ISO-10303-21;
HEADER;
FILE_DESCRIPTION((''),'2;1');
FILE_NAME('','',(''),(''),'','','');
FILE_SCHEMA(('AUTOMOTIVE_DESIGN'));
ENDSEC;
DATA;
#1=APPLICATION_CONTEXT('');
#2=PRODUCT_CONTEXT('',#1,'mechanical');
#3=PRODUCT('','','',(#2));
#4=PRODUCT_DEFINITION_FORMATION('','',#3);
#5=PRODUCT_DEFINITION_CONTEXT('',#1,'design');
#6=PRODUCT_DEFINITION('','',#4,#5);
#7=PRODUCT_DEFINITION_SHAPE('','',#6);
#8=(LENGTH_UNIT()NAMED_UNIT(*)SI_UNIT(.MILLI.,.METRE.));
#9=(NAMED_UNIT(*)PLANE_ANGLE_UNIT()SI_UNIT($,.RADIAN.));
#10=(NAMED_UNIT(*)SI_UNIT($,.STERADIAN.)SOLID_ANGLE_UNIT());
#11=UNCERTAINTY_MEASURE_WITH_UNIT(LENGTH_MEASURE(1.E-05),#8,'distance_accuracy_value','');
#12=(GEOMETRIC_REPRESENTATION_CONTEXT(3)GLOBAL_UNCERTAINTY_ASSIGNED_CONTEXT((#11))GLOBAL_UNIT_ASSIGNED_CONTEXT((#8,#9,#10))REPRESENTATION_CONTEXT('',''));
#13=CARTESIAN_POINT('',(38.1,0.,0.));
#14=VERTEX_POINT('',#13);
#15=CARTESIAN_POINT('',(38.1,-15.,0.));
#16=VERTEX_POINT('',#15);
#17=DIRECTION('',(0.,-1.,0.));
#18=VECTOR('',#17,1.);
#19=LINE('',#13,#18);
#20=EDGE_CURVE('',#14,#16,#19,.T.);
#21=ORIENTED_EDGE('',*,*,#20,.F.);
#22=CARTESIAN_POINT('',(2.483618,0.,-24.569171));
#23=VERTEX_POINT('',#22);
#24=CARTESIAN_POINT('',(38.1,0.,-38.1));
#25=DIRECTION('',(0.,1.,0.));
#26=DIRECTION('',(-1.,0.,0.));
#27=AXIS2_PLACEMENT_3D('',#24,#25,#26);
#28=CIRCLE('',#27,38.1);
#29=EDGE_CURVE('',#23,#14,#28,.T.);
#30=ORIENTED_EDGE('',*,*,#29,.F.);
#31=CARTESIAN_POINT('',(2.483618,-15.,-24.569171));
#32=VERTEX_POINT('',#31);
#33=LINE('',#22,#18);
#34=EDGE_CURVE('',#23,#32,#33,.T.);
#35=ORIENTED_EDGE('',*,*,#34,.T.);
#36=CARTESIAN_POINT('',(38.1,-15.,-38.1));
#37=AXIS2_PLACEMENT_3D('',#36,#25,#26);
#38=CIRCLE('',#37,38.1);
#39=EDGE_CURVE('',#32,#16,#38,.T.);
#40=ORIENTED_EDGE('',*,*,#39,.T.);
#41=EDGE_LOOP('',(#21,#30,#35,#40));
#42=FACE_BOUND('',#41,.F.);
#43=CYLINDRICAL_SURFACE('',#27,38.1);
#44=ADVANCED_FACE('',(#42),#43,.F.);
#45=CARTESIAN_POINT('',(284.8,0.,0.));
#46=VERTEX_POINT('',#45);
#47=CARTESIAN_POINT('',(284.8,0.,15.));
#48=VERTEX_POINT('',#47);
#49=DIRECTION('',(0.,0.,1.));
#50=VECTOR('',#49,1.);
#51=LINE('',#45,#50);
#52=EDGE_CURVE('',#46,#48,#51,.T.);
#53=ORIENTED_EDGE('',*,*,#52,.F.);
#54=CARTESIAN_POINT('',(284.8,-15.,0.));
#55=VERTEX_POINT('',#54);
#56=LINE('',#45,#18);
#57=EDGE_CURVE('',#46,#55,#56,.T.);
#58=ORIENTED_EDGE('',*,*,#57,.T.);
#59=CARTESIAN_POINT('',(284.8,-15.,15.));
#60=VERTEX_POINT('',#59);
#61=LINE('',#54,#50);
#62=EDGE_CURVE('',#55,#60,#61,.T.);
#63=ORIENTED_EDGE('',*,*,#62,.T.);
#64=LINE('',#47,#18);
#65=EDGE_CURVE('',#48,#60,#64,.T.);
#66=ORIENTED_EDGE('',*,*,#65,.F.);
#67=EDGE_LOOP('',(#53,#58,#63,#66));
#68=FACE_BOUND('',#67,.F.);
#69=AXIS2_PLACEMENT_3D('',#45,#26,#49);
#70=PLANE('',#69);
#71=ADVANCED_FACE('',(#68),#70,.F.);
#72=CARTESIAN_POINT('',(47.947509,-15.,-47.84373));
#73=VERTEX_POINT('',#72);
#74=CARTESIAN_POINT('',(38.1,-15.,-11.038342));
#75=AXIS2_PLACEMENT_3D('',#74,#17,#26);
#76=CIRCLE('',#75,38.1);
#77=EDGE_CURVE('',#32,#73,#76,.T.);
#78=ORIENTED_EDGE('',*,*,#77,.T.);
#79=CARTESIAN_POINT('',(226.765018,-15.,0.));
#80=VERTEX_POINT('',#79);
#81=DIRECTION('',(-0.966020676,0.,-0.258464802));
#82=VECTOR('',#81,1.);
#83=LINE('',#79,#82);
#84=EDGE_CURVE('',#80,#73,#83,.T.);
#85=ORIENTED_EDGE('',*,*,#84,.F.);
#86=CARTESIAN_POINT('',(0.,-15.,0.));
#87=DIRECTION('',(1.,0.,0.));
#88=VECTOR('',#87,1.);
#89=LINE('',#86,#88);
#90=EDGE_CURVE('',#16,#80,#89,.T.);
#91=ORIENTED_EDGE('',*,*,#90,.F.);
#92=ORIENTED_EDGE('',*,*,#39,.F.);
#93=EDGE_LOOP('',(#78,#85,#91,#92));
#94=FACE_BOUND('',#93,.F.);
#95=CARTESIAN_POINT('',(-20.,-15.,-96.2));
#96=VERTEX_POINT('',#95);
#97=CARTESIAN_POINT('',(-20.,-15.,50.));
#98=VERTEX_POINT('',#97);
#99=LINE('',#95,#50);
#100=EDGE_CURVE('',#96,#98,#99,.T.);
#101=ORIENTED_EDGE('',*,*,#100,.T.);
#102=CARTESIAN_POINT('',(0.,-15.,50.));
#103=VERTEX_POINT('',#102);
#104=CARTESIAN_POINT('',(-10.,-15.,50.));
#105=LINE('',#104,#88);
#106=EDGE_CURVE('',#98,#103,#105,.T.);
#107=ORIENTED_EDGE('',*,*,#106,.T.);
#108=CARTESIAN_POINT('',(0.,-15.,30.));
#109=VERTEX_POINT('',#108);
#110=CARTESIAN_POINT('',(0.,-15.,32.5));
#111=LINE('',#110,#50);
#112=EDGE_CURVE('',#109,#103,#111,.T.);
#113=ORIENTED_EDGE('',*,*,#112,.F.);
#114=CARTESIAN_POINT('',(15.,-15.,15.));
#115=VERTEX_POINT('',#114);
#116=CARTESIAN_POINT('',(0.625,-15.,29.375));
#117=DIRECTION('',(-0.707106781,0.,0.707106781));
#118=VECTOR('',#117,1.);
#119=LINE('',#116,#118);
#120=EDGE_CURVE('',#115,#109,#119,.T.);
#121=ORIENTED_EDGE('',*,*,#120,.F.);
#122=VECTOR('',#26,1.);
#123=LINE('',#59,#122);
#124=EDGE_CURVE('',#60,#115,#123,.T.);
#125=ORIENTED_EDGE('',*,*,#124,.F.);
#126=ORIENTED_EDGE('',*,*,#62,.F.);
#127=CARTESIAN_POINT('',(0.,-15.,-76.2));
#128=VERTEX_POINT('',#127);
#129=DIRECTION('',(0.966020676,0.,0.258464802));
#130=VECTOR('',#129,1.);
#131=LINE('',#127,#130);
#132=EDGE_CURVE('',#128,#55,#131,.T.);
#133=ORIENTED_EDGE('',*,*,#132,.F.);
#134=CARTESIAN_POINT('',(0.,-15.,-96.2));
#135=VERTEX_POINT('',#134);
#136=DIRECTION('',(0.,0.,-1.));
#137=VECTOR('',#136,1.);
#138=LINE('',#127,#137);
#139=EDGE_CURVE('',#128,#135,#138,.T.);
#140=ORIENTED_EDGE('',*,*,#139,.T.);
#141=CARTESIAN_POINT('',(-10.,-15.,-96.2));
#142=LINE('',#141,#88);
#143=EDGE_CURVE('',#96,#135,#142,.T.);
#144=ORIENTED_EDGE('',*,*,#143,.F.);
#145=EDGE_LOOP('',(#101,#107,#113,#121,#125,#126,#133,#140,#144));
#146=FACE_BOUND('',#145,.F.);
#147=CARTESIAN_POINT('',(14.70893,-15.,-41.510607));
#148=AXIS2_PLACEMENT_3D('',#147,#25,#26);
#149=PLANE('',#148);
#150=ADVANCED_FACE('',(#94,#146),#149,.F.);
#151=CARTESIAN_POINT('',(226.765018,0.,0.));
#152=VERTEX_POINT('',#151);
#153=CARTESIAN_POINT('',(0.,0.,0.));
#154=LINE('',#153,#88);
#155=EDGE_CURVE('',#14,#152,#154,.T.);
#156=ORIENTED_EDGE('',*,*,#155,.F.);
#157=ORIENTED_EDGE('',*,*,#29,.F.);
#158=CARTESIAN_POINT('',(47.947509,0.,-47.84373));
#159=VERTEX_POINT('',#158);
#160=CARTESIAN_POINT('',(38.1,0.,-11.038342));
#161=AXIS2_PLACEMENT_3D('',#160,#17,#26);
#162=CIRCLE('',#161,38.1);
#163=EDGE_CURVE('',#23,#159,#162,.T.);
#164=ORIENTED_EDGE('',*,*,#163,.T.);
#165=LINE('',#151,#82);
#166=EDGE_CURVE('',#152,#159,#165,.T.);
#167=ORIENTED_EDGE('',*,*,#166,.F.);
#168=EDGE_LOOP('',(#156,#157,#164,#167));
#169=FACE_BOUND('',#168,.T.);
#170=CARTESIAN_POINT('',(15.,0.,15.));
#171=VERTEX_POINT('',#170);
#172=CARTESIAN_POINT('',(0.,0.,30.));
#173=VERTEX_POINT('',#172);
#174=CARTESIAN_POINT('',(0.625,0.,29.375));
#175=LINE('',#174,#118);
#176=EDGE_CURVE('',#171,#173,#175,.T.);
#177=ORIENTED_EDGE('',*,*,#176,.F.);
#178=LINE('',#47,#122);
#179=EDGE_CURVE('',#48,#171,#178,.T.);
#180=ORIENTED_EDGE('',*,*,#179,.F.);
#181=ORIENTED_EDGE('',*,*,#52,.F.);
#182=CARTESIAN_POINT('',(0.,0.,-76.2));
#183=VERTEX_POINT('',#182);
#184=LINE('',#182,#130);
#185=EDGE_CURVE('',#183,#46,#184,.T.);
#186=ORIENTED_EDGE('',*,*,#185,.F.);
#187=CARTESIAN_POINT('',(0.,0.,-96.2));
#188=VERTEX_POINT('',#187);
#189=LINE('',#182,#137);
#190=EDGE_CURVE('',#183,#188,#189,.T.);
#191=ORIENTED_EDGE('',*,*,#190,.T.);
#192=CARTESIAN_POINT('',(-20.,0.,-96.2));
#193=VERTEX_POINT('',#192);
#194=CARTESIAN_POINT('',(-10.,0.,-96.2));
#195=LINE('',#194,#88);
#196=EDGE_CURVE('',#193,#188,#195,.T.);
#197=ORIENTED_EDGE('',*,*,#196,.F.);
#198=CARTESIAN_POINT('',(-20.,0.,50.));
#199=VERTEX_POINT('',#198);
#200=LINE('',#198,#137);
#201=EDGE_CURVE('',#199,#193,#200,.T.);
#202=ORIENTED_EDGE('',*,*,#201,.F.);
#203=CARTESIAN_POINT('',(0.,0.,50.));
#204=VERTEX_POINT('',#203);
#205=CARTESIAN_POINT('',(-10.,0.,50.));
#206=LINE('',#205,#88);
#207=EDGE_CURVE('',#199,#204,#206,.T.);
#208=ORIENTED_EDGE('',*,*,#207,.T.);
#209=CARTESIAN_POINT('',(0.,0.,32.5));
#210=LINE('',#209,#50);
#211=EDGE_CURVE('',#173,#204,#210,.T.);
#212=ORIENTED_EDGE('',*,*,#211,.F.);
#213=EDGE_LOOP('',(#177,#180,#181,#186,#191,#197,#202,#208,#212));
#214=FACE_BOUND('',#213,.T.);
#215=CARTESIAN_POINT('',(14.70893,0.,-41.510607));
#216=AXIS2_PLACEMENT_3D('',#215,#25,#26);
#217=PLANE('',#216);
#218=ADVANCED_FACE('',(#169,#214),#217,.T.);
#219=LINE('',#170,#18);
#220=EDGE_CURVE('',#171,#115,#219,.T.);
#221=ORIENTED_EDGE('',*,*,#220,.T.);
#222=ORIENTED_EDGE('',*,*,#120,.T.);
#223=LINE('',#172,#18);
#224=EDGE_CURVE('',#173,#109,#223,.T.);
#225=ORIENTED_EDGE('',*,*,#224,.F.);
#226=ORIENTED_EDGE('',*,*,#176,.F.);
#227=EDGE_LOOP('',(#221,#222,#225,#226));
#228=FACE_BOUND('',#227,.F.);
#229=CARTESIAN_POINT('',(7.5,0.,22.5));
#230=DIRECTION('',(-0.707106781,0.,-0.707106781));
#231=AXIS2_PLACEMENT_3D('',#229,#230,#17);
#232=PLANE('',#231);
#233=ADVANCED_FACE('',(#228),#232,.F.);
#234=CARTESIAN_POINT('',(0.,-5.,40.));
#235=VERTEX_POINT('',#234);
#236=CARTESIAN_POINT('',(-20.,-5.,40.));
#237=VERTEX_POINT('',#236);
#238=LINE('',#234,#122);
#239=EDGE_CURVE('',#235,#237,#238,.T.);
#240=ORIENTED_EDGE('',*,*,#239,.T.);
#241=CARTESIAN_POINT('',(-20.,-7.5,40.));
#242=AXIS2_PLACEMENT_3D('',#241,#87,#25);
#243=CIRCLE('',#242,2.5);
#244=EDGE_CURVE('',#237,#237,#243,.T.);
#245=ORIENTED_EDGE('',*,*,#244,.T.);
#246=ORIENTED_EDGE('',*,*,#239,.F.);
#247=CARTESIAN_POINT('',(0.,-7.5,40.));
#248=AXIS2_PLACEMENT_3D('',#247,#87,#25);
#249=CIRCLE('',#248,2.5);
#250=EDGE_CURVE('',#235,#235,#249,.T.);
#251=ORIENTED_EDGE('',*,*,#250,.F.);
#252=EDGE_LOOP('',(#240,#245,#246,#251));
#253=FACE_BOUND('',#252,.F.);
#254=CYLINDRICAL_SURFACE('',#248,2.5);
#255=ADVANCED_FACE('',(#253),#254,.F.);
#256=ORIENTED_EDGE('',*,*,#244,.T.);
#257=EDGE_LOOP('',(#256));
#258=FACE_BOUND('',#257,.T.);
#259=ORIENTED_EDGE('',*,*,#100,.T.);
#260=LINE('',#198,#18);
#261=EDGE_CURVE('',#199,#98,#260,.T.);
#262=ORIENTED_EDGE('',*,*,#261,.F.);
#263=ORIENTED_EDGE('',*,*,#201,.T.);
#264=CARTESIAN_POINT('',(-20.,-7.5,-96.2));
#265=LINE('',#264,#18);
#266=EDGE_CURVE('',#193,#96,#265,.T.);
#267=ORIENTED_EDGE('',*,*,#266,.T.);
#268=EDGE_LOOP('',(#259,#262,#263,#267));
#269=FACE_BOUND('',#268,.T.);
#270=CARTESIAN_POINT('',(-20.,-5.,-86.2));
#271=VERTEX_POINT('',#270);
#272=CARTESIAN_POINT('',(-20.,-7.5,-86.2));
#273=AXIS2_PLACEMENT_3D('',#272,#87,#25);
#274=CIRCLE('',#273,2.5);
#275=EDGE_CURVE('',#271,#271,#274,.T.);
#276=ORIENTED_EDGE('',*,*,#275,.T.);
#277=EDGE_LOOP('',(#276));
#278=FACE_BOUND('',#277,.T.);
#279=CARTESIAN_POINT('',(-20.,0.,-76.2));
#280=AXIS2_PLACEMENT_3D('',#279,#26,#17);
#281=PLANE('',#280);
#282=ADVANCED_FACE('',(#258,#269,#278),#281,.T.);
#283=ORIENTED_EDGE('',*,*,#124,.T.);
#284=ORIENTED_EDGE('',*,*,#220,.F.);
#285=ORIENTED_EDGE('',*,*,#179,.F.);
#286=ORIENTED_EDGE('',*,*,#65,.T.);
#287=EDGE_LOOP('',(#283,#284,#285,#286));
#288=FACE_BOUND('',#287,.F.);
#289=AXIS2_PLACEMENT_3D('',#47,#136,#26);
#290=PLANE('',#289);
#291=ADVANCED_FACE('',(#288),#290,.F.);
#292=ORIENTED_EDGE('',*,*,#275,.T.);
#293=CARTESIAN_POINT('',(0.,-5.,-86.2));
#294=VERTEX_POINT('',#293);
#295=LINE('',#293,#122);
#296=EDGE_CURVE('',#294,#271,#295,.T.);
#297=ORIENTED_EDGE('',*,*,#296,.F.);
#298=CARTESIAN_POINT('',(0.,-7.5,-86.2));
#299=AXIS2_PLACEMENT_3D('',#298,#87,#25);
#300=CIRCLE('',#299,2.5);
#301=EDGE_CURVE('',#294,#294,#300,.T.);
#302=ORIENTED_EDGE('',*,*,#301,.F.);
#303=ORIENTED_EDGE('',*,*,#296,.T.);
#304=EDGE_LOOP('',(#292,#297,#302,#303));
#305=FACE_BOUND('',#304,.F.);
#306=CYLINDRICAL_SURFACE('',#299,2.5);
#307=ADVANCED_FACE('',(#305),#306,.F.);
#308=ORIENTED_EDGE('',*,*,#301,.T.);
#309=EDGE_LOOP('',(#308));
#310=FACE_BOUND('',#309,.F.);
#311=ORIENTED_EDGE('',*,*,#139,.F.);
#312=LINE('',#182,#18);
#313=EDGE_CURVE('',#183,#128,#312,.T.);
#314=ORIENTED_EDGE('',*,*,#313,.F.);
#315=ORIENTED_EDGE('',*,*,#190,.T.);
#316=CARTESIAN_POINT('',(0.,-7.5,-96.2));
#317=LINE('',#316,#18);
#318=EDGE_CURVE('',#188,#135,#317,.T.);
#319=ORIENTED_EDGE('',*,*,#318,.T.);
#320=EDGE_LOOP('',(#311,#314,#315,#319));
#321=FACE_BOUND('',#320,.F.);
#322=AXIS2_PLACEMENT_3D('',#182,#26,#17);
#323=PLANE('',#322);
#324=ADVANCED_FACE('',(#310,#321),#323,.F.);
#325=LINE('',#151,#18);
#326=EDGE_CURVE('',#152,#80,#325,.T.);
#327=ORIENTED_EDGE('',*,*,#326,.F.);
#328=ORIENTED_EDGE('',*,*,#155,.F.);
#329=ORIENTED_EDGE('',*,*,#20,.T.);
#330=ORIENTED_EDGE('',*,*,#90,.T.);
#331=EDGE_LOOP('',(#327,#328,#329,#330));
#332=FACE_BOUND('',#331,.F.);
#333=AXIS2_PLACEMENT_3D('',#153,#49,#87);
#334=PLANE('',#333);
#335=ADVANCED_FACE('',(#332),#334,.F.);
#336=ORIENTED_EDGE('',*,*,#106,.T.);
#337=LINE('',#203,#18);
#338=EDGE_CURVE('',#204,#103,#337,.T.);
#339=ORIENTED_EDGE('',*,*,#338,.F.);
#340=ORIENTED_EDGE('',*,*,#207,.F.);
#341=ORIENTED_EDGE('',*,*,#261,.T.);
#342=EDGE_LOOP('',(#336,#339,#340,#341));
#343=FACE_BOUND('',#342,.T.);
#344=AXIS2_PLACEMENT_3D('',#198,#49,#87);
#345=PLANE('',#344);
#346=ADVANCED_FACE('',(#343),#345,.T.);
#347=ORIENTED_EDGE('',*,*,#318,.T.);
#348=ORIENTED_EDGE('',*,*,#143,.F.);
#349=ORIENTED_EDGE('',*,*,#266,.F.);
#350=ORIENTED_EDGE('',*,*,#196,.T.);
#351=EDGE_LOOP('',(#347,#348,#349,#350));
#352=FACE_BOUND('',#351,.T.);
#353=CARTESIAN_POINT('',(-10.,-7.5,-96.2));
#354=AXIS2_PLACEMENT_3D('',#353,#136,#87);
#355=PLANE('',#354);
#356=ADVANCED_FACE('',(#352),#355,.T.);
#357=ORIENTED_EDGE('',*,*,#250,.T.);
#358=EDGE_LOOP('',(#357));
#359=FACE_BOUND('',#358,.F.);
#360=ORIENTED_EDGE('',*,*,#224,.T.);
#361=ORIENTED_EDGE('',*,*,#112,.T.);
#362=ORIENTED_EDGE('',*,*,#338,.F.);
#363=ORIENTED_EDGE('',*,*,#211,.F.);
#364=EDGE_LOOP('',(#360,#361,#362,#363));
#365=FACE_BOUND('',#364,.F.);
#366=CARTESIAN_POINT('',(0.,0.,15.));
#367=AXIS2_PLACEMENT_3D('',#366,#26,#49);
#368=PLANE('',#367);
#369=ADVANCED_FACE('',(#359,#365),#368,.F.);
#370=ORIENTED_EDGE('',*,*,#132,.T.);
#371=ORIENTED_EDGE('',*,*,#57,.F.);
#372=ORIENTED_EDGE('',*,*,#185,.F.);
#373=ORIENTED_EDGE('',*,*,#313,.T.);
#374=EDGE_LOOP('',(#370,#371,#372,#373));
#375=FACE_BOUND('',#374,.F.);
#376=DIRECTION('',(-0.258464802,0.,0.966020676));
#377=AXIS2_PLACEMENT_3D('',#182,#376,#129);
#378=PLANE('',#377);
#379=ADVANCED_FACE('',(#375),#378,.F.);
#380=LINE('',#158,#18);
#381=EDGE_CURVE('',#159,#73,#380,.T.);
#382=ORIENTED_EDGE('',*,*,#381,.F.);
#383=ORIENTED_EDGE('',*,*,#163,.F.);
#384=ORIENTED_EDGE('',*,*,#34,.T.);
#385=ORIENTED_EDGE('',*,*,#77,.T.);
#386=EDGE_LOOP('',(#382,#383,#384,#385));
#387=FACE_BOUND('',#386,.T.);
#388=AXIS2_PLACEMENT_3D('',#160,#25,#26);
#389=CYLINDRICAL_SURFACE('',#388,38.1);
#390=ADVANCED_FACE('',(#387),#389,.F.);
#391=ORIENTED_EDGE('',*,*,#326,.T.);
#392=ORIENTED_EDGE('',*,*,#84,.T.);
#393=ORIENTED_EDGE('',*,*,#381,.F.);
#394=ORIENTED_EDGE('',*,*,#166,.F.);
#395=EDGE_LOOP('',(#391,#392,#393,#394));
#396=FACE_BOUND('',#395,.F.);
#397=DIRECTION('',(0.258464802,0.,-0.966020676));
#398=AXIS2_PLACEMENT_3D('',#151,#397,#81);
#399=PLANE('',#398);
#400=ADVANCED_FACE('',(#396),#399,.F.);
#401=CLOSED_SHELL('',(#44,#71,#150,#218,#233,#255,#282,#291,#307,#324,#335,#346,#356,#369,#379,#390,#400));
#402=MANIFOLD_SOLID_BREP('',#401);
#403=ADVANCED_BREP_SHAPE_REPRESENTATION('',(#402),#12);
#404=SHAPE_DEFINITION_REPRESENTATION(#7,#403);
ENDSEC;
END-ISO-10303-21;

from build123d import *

# Parameters (mm, degrees)
F0_W        = 20
F0_H        = 35
F1_DEPTH    = 15
F2_SIZE     = 15
F3_R        = 2.5
F4_DEPTH    = 20.001
F5_W        = 20
F5_H        = 15
F6_DEPTH    = 20
F7_R        = 2.5
F8_DEPTH    = 20.001
F9_T1_DEPTH = 15


# Not quite as in the source:
# - a fillet or chamfer that OpenCascade refuses, or shapes differently, is made with other operations: its cross-section is extruded or revolved along the edge and cut away or added


with BuildPart() as f1:
    # F0 (on Front) → F1 (new body)
    with BuildSketch(Plane.XZ):
        with Locations((-10, 32.5)):
            Rectangle(F0_W, F0_H)
        Polygon((0, 15), (0, 0), (226.7650184275, 0), (284.8, 0), (284.8, 15), align=None)
        Polygon((284.8, 0), (226.7650184275, 0), (0, -60.6723820371), (0, -76.2), align=None)
        Polygon((0, -60.6723820371), (0, 0), (0, 15), (-20, 15), (-20, -76.2), (0, -76.2), align=None)
    extrude(amount=F1_DEPTH)

    # F2
    f2_edges = [f1.edges().sort_by_distance(p)[0] for p in [
        (0, -7.5, 15),
    ]]
    chamfer(f2_edges, length=F2_SIZE)

    # F3 (on face) → F4 (cut, through all)
    with BuildSketch(Plane.YZ):
        with Locations((-7.5, 40)):
            Circle(F3_R)
    extrude(amount=-F4_DEPTH, mode=Mode.SUBTRACT)

    # F5 (on face) → F6 (join)
    with BuildSketch(Plane(origin=(0, 0, -76.2), x_dir=(1, 0, 0), z_dir=(0, 0, -1))):
        with Locations((-10, 7.5)):
            Rectangle(F5_W, F5_H)
    extrude(amount=F6_DEPTH)

    # F7 (on face) → F8 (cut, through all)
    with BuildSketch(Plane.YZ):
        with Locations((-7.5, -86.2)):
            Circle(F7_R)
    extrude(amount=-F8_DEPTH, mode=Mode.SUBTRACT)

    # F9: fillet of radius 38.1 on 2 edges, made by hand

    # F9_s2 → F9_t1 (join)
    with BuildSketch(Plane.XZ):
        with BuildLine():
            ThreePointArc((0, -11.038341962), (14.9006475381, -41.2608508809), (47.9475089423, -47.8437297148))
            Line((47.9475089423, -47.8437297148), (0, -60.6723820371))
            Line((0, -60.6723820371), (0, -11.038341962))
        make_face()
        with BuildLine():
            ThreePointArc((0, -38.1), (11.1592316368, -11.1592316368), (38.1, 0))
            Line((38.1, 0), (0, 0))
            Line((0, 0), (0, -38.1))
        make_face()
    extrude(amount=F9_T1_DEPTH)


solid = f1.part
